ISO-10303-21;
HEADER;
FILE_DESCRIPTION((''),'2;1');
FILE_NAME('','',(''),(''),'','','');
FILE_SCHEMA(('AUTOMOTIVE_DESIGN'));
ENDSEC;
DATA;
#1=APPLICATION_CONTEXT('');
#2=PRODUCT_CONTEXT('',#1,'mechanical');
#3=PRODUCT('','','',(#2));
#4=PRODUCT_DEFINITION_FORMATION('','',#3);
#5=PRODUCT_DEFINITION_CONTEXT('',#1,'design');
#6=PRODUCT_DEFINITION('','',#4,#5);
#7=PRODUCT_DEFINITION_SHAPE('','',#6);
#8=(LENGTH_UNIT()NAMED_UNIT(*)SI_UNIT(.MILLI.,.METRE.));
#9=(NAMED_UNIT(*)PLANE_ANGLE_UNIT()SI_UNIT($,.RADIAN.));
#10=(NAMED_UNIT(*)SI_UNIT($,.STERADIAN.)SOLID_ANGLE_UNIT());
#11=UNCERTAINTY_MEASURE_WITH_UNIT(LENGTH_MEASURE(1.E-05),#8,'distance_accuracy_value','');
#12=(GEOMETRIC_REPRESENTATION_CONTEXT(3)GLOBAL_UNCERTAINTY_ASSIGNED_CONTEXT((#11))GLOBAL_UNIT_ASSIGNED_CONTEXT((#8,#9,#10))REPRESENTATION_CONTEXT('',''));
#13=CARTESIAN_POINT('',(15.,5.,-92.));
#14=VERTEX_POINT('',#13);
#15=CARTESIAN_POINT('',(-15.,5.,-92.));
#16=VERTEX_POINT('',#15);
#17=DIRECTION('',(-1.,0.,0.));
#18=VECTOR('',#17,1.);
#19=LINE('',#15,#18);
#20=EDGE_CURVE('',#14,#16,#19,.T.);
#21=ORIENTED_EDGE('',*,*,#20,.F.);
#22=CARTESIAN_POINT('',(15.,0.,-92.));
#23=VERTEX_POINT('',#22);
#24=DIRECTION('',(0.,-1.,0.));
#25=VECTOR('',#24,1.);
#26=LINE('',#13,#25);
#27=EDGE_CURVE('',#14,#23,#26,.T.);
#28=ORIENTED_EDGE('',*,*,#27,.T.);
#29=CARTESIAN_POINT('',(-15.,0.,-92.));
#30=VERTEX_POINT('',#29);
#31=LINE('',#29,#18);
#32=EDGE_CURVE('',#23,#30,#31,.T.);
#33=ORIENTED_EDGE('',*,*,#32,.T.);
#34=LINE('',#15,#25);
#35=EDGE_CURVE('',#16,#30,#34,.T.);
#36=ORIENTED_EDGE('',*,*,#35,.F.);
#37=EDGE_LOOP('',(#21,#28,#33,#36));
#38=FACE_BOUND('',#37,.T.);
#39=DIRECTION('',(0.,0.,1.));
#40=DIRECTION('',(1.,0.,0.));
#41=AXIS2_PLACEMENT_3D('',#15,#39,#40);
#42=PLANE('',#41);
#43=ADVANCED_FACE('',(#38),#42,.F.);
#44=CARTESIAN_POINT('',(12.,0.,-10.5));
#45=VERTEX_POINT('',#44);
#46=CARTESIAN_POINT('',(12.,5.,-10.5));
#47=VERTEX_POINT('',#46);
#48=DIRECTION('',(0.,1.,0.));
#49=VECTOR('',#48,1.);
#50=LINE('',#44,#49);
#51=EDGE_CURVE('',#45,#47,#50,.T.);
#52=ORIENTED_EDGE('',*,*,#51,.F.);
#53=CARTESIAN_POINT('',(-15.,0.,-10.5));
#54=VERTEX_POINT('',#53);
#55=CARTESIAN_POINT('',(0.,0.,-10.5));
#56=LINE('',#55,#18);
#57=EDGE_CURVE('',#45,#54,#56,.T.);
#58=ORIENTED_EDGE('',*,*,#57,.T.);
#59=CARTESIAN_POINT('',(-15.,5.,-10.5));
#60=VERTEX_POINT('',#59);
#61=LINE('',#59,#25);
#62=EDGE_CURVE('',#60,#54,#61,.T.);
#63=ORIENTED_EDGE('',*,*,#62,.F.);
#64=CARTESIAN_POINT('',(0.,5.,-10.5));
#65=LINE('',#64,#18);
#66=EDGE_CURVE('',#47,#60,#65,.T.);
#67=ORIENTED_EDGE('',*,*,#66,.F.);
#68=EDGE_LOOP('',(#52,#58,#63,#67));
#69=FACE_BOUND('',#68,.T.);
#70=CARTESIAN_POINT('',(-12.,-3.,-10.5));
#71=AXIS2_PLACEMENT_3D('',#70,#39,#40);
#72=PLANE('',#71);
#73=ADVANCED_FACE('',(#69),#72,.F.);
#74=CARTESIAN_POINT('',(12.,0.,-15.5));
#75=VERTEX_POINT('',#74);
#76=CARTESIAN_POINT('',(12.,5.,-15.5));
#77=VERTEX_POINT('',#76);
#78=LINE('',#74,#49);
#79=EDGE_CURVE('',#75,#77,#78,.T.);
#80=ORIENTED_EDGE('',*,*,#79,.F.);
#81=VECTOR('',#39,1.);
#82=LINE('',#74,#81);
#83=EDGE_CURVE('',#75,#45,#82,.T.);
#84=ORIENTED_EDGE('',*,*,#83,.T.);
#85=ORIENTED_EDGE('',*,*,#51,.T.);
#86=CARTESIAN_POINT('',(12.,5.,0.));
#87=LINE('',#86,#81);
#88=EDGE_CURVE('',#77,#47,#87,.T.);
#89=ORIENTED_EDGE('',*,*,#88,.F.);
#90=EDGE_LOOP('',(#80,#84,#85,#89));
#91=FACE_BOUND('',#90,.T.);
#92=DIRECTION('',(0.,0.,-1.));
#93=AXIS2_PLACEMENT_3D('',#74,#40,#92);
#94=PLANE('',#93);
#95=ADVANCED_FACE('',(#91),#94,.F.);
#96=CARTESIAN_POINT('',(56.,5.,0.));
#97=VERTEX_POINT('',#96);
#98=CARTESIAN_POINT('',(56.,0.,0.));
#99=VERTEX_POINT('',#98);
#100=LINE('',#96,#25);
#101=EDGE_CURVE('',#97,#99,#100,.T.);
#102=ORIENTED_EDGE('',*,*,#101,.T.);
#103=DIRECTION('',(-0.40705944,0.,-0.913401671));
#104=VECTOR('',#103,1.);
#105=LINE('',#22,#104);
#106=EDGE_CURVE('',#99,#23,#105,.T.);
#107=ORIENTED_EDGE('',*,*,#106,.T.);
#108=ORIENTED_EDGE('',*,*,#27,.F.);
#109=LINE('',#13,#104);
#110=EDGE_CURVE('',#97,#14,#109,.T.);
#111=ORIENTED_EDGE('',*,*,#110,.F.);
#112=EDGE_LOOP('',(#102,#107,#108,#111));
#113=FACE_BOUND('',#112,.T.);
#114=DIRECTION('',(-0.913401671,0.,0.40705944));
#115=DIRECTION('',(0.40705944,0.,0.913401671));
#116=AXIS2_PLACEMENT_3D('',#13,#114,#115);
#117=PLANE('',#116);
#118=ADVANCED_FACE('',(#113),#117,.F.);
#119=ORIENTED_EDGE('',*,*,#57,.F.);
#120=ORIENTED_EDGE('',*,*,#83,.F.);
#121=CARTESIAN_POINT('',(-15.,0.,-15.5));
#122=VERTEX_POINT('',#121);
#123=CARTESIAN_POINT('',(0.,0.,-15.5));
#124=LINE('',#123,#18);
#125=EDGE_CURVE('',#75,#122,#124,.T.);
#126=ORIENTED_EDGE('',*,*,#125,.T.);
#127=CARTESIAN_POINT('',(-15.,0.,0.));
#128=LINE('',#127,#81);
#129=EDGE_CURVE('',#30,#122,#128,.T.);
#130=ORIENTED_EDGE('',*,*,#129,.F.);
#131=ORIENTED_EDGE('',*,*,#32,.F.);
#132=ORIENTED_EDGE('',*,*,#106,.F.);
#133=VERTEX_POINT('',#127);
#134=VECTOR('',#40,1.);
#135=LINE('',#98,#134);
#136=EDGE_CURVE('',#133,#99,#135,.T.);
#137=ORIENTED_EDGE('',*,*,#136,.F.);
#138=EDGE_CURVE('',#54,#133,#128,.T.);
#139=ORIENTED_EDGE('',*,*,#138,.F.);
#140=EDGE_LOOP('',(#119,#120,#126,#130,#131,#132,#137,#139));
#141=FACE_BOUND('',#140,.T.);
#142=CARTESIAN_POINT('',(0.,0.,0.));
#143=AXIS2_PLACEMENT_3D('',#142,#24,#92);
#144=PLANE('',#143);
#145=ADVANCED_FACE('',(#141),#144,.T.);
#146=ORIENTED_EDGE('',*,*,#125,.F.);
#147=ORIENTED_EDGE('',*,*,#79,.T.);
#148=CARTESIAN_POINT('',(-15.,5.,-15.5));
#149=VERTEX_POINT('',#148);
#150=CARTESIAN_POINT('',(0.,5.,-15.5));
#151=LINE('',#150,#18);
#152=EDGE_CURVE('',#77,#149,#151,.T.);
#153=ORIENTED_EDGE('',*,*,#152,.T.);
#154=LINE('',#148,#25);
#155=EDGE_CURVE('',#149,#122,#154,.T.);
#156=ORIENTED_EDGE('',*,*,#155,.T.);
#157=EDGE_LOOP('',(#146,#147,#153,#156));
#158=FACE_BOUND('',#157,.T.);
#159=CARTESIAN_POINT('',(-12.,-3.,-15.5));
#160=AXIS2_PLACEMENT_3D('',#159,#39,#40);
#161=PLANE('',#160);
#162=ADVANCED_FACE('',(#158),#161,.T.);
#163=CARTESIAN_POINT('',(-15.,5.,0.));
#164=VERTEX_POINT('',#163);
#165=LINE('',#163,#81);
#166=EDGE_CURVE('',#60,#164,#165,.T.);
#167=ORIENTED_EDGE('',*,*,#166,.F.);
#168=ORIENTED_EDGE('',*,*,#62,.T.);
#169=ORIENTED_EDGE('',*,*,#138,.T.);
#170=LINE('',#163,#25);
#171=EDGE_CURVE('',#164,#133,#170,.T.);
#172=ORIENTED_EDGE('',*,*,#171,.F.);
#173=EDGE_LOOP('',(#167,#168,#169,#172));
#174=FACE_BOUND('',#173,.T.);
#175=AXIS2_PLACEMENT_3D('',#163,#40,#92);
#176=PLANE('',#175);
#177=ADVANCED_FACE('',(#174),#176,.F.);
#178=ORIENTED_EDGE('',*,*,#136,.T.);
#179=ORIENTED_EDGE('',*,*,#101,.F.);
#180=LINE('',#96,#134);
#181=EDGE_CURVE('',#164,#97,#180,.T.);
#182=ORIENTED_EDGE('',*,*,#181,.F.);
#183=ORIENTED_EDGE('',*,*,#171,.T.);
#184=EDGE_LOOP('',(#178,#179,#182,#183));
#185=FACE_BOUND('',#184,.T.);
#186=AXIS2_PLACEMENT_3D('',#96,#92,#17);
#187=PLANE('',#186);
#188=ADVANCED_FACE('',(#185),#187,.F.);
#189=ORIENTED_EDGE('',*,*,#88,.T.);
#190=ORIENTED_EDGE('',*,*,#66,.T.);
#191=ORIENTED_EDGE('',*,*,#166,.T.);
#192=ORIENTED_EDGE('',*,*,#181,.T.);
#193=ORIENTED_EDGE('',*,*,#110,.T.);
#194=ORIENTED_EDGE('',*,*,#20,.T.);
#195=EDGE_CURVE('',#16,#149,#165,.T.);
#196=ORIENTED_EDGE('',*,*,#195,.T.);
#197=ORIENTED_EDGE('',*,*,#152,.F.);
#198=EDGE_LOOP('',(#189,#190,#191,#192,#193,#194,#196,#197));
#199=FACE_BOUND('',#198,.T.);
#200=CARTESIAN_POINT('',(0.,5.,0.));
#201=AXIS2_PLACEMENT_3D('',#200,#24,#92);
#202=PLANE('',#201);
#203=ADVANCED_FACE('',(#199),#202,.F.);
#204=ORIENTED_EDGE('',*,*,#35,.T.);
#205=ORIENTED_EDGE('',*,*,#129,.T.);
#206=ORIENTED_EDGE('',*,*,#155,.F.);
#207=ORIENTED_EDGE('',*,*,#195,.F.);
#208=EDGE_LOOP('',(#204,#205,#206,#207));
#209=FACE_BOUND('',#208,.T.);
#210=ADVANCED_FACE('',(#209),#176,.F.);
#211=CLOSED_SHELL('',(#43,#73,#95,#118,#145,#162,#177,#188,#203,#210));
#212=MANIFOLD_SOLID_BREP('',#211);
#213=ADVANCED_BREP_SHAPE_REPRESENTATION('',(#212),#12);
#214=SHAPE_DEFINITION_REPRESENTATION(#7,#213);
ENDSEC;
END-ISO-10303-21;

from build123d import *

# Parameters (mm, degrees)
SM_BASE_FLANGE_1_DEPTH = 5
OTHER_START            = -15
OTHER_1_OUTLINE_W      = 5
OTHER_1_OUTLINE_H      = 5
OTHER_1_DEPTH          = 27


# Read off the part's stored shape, not the designer's step: Полость1
# Sheet-metal steps are written as plain solids
with BuildPart() as part:
    # Sketch 1 → Базовая кромка1 (new body)
    with BuildSketch(Plane(origin=(0, 0, 0), x_dir=(1, 0, 0), z_dir=(0, 1, 0))):
        Polygon((-15, 0), (-15, 92), (15, 92), (56, 0), align=None)
    extrude(amount=SM_BASE_FLANGE_1_DEPTH)

    # Полость1 outline → Полость1 (cut)
    with BuildSketch(Plane.YZ.offset(OTHER_START)):
        with Locations((2.5, -13)):
            Rectangle(OTHER_1_OUTLINE_W, OTHER_1_OUTLINE_H)
    extrude(amount=OTHER_1_DEPTH, mode=Mode.SUBTRACT)


solid = part.part
